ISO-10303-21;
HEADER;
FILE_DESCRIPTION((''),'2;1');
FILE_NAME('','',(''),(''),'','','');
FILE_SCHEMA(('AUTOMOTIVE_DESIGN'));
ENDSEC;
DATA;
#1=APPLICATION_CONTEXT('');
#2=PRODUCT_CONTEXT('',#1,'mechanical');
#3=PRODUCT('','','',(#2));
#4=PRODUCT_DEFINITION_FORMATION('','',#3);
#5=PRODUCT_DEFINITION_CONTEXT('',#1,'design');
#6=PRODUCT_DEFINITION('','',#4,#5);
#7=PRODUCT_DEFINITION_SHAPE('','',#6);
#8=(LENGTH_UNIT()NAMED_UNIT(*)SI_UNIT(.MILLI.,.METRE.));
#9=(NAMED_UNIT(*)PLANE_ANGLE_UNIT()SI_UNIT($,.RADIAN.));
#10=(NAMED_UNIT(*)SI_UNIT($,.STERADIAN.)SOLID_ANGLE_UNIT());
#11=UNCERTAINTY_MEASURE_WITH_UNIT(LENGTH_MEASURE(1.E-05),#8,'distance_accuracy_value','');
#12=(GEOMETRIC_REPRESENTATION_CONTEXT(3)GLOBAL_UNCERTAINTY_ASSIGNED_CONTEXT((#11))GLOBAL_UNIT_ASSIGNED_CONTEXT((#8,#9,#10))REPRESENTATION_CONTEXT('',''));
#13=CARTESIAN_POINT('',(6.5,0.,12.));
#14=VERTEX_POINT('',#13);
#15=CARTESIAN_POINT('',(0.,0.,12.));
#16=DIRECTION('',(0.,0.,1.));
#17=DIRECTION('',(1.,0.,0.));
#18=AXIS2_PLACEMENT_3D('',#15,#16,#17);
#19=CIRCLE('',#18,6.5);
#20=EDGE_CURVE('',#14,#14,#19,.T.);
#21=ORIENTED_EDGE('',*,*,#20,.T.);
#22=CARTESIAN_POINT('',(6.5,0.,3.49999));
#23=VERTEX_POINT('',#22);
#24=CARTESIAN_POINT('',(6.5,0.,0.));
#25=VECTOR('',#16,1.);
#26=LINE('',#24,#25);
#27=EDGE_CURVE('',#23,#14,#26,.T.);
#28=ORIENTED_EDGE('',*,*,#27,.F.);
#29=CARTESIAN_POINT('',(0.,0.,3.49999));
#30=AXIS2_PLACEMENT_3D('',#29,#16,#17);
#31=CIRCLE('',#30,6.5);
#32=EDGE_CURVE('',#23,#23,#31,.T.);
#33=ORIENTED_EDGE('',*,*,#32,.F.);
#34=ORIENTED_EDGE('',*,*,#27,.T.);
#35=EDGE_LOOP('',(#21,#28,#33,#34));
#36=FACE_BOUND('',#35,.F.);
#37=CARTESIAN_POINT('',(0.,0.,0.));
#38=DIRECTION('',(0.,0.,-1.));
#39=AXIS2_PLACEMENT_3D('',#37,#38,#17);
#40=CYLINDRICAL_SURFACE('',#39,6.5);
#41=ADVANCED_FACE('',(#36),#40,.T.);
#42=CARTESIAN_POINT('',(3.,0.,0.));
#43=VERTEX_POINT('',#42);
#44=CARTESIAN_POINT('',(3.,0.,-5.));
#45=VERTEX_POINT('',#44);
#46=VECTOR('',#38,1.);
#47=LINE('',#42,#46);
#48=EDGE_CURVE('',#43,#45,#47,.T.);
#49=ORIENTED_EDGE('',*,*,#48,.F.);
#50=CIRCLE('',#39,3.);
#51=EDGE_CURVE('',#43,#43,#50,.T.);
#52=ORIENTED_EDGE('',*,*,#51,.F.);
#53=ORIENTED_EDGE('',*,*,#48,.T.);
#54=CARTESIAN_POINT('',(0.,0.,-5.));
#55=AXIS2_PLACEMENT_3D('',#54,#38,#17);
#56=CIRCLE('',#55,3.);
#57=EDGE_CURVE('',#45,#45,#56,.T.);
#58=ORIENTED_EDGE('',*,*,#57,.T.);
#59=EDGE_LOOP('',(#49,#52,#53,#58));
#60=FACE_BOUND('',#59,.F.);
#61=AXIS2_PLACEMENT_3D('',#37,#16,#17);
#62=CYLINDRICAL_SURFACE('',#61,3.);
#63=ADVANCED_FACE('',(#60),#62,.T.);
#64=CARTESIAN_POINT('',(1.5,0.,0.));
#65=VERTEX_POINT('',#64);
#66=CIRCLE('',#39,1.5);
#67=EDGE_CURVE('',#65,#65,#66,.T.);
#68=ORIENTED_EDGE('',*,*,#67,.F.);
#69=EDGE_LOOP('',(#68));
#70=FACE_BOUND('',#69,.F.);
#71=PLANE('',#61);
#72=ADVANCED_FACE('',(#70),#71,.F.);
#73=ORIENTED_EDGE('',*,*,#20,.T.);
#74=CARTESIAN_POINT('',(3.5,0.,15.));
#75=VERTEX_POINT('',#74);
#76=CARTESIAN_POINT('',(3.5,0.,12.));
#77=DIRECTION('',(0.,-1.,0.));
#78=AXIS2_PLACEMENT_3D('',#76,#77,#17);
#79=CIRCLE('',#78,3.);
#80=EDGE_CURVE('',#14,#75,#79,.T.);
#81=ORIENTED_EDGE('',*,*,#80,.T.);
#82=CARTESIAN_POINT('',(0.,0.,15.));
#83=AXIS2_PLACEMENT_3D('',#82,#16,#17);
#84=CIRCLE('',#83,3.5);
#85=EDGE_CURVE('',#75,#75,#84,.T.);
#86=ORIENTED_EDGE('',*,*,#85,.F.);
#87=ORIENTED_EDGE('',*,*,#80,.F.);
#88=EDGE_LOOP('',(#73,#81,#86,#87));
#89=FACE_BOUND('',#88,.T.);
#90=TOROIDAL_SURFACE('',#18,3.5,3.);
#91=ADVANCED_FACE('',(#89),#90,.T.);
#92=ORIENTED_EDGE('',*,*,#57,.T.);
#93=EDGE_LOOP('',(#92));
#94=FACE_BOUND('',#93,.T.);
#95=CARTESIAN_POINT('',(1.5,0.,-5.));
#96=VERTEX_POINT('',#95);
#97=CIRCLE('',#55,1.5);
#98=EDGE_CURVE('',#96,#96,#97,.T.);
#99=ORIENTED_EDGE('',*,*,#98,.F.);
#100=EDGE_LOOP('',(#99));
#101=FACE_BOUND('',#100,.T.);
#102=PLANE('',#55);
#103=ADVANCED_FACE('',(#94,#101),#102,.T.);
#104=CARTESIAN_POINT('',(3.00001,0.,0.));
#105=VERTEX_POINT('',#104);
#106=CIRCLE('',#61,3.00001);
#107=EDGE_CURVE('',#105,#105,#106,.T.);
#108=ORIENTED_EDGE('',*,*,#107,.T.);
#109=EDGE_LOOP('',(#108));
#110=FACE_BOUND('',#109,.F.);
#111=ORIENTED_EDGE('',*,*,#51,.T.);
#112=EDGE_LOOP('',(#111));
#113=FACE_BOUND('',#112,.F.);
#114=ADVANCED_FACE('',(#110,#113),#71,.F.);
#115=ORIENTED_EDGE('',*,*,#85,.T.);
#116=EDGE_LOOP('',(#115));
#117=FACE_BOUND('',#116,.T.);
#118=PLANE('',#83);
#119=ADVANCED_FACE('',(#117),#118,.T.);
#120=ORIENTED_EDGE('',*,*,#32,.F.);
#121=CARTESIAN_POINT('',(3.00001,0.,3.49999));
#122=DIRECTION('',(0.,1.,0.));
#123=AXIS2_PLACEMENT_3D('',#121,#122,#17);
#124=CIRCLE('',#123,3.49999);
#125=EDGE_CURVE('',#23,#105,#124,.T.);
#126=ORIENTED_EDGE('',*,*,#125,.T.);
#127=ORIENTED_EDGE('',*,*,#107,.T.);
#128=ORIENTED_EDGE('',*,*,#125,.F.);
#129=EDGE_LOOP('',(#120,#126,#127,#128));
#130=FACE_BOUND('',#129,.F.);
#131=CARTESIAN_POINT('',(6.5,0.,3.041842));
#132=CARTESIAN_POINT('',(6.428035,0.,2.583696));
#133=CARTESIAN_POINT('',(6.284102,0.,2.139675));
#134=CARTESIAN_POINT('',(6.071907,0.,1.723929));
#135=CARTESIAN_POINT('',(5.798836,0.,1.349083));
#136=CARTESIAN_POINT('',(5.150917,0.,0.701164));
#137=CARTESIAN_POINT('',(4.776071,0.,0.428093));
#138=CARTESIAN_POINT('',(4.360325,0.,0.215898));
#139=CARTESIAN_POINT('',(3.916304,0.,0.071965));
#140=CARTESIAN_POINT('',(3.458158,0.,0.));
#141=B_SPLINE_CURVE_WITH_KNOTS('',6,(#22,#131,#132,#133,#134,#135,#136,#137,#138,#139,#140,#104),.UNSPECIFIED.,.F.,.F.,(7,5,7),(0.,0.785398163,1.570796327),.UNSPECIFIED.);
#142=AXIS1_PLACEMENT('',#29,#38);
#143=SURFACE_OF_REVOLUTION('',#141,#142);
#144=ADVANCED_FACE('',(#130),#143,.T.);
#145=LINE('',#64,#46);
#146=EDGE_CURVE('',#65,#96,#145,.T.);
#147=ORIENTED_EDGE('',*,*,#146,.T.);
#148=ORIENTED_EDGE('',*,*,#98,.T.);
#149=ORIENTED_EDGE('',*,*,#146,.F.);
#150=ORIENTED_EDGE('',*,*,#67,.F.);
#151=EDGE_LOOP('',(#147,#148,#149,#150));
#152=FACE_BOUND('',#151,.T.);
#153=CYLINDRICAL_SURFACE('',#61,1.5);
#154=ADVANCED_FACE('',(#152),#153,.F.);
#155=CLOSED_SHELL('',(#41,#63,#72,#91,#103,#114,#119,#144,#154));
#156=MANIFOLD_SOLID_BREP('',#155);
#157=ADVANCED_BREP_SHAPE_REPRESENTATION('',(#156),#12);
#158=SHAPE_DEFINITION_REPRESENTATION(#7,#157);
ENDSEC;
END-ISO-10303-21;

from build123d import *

# Parameters (mm, degrees)
F0_R     = 6.5
F1_DEPTH = 15
F2_R     = 3
F2_R_2   = 1.5
F3_DEPTH = 5
F4_R     = 3.49999
F5_R     = 3


# Not quite as in the source:
# - a fillet or chamfer is up to 0.001 mm smaller than in the source, because OpenCascade refuses the exact size


with BuildPart() as f1:
    # F0 (on Top) → F1 (new body)
    with BuildSketch(Plane.XY):
        Circle(F0_R)
    extrude(amount=F1_DEPTH)

    # F2 (on face) → F3 (join)
    with BuildSketch(Plane(origin=(0, 0, 0), x_dir=(1, 0, 0), z_dir=(0, 0, -1))):
        Circle(F2_R)
        Circle(F2_R_2, mode=Mode.SUBTRACT)
    extrude(amount=F3_DEPTH)

    # F4 (radius 3.5 in the source; OpenCascade refuses exactly that, so slightly less here)
    f4_edges = [f1.edges().sort_by_distance(p)[0] for p in [
        (-6.5, 0, 0),
    ]]
    fillet(f4_edges, radius=F4_R)

    # F5
    f5_edges = [f1.edges().sort_by_distance(p)[0] for p in [
        (-6.5, 0, 15),
    ]]
    fillet(f5_edges, radius=F5_R)


solid = f1.part
